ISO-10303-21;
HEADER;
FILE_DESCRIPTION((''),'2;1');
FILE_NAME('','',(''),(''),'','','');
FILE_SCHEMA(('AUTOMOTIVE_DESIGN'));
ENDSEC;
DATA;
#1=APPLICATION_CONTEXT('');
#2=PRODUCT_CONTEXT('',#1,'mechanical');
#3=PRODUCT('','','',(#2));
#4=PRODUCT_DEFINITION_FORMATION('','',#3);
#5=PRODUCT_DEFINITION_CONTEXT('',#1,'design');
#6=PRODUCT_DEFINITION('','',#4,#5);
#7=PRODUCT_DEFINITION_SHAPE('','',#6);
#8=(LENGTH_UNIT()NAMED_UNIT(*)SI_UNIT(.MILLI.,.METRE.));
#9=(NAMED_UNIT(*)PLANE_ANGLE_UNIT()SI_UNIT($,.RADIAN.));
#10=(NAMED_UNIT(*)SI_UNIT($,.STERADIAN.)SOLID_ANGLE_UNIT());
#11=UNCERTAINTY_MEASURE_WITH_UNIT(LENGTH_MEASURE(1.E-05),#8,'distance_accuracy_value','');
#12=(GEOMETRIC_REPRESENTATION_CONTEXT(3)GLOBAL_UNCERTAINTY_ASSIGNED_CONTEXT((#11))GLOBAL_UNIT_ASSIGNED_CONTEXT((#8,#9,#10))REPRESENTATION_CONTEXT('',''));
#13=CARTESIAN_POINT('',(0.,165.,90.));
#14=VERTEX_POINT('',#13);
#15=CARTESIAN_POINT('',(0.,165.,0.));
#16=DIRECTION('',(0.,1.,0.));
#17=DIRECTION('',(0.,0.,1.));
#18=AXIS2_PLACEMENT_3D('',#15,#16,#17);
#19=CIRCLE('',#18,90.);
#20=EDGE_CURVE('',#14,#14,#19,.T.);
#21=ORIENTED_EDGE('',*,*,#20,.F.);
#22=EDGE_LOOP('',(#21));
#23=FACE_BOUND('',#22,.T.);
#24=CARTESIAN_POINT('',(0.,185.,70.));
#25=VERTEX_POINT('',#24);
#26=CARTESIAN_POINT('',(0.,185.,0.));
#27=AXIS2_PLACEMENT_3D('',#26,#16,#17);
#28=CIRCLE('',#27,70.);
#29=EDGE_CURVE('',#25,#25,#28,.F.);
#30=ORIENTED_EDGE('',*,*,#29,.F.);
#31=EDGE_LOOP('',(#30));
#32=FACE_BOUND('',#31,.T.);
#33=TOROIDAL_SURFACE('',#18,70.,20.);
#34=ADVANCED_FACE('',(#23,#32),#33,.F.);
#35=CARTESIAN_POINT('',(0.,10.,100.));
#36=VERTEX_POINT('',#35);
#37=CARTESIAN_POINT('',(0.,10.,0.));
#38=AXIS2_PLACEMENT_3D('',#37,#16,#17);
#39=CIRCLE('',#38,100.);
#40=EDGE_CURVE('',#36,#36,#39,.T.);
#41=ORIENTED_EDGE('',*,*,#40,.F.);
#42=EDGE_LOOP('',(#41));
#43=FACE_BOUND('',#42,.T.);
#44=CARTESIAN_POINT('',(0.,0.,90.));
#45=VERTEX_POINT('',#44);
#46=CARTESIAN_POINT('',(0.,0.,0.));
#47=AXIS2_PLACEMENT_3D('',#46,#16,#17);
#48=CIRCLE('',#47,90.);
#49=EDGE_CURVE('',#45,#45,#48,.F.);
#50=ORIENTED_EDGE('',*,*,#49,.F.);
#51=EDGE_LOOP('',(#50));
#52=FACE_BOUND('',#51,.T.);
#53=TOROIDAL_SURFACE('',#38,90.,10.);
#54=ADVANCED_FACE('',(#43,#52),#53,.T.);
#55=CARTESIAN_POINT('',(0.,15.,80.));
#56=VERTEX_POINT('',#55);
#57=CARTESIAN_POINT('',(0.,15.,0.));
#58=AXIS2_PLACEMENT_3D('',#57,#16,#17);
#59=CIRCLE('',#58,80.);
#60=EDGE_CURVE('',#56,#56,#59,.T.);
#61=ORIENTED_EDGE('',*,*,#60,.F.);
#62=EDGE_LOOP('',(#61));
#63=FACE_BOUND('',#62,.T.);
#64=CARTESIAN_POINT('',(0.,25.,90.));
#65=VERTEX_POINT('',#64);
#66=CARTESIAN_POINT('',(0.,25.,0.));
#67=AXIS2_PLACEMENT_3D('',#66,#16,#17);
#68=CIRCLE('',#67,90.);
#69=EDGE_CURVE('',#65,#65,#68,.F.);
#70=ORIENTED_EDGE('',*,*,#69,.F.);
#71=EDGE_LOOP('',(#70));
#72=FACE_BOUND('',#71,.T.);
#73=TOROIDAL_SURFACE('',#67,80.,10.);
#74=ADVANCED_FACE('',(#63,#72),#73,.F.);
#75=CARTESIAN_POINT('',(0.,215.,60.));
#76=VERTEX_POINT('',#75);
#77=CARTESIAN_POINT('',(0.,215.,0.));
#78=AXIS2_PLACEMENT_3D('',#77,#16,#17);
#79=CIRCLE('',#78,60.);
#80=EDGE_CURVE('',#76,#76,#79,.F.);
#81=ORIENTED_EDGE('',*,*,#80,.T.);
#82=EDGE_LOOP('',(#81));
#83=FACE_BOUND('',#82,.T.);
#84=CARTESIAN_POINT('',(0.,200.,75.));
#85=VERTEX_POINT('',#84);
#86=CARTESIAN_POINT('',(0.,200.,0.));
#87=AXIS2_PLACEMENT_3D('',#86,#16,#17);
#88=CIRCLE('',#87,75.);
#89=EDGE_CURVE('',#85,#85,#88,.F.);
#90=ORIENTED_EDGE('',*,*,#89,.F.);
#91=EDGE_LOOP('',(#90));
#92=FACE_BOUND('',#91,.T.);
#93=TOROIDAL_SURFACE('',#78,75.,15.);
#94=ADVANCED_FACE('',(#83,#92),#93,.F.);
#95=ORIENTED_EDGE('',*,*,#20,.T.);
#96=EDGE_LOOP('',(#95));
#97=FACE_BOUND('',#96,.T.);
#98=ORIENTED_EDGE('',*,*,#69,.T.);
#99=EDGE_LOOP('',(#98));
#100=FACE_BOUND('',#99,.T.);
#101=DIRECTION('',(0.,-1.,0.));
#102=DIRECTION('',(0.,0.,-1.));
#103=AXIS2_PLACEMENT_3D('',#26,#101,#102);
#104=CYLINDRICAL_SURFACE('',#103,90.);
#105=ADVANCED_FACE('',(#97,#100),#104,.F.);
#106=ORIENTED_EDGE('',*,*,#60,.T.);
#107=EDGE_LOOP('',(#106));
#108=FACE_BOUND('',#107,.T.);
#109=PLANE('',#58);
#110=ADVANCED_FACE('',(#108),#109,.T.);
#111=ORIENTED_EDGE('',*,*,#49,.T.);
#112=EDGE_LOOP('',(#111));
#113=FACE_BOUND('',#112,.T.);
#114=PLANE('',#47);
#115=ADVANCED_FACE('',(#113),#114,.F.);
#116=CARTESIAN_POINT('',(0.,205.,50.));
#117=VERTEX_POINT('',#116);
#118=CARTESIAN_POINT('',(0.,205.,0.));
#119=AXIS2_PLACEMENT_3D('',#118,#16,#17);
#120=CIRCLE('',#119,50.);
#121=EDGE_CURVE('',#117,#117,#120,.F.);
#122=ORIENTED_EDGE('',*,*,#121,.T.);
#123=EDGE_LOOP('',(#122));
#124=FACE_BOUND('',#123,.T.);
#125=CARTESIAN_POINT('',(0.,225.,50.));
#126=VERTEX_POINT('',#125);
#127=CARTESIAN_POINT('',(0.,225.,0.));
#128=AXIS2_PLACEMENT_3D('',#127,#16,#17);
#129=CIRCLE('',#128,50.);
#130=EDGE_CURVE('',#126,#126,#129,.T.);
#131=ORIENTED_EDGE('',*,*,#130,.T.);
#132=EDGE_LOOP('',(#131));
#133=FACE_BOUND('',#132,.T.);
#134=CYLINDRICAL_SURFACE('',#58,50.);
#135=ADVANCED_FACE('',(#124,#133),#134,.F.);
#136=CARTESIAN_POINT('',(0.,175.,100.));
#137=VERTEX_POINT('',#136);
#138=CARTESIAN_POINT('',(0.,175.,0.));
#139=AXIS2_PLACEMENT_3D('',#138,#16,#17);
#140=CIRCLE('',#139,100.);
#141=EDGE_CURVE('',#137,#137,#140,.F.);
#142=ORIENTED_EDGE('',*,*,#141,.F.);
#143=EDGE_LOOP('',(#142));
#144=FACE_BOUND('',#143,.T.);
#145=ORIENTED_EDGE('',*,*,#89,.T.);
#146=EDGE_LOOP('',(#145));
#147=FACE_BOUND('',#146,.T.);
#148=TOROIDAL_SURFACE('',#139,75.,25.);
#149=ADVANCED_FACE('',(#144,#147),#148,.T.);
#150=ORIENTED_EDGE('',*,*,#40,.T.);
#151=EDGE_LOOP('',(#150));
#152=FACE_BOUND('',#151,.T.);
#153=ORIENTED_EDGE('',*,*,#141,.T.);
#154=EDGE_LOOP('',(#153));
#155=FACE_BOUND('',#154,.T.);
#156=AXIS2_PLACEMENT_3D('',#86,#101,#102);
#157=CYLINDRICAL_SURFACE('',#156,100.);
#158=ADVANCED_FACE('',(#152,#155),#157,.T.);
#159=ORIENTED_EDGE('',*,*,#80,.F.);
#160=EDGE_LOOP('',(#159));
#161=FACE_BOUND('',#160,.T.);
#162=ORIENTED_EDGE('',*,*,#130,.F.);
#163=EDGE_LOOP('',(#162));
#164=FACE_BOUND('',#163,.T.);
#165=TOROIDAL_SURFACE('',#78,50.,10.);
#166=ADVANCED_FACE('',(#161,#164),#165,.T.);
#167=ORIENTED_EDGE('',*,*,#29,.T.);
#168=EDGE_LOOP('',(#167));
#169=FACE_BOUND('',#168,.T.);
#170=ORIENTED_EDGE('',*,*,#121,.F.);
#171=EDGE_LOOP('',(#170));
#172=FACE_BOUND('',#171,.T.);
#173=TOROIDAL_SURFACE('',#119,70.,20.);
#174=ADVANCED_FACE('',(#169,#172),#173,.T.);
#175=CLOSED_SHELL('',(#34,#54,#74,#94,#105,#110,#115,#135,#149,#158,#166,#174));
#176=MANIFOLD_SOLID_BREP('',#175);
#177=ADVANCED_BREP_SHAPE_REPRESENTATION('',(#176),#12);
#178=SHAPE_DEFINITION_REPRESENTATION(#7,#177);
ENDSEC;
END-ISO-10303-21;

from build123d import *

# Parameters (mm, degrees)
SKETCH1_R           = 100
BOSS_EXTRUDE2_DEPTH = 200
SKETCH4_R           = 60
BOSS_EXTRUDE5_DEPTH = 25
SKETCH5_R           = 50
CUT_EXTRUDE2_DEPTH  = 210
FILLET2_R           = 10
FILLET3_R           = 10
FILLET4_R           = 15
FILLET5_R           = 25
SKETCH6_R           = 90
CUT_EXTRUDE4_DEPTH  = 170
FILLET7_R           = 20
FILLET8_R           = 20
FILLET9_R           = 10


with BuildPart() as part:
    # Sketch1 → Boss-Extrude2 (new body)
    with BuildSketch(Plane(origin=(0, 0, 0), x_dir=(1, 0, 0), z_dir=(0, 1, 0))):
        with Locations(Location((0, 0, 0), (0, 0, 270))):
            Circle(SKETCH1_R)
    extrude(amount=BOSS_EXTRUDE2_DEPTH)

    # Sketch4 → Boss-Extrude5 (add)
    with BuildSketch(Plane(origin=(0, 200, 0), x_dir=(1, 0, 0), z_dir=(0, 1, 0))):
        with Locations(Location((0, 0, 0), (0, 0, 270))):
            Circle(SKETCH4_R)
    extrude(amount=BOSS_EXTRUDE5_DEPTH)

    # Sketch5 → Cut-Extrude2 (cut)
    with BuildSketch(Plane(origin=(0, 225, 0), x_dir=(1, 0, 0), z_dir=(0, 1, 0))):
        with Locations(Location((0, 0, 0), (0, 0, 270))):
            Circle(SKETCH5_R)
    extrude(amount=-CUT_EXTRUDE2_DEPTH, mode=Mode.SUBTRACT)

    # Fillet2
    fillet2_edges = [part.edges().sort_by_distance(p)[0] for p in [
        (0, 0, -100),
    ]]
    fillet(fillet2_edges, radius=FILLET2_R)

    # Fillet3
    fillet3_edges = [part.edges().sort_by_distance(p)[0] for p in [
        (0, 225, -60),
    ]]
    fillet(fillet3_edges, radius=FILLET3_R - 0.0001)  # a hair under: the kernel refuses the full size

    # Fillet4
    fillet4_edges = [part.edges().sort_by_distance(p)[0] for p in [
        (0, 200, -60),
    ]]
    fillet(fillet4_edges, radius=FILLET4_R)

    # Fillet5
    fillet5_edges = [part.edges().sort_by_distance(p)[0] for p in [
        (0, 200, -100),
    ]]
    fillet(fillet5_edges, radius=FILLET5_R - 0.0001)  # a hair under: the kernel refuses the full size

    # Sketch6 → Cut-Extrude4 (cut)
    with BuildSketch(Plane(origin=(0, 15, 0), x_dir=(1, 0, 0), z_dir=(0, 1, 0))):
        with Locations(Location((0, 0, 0), (0, 0, 270))):
            Circle(SKETCH6_R)
    extrude(amount=CUT_EXTRUDE4_DEPTH, mode=Mode.SUBTRACT)

    # Fillet7
    fillet7_edges = [part.edges().sort_by_distance(p)[0] for p in [
        (0, 185, -90),
    ]]
    fillet(fillet7_edges, radius=FILLET7_R)

    # Fillet8
    fillet8_edges = [part.edges().sort_by_distance(p)[0] for p in [
        (0, 185, -50),
    ]]
    fillet(fillet8_edges, radius=FILLET8_R - 0.0001)  # a hair under: the kernel refuses the full size

    # Fillet9
    fillet9_edges = [part.edges().sort_by_distance(p)[0] for p in [
        (0, 15, -90),
    ]]
    fillet(fillet9_edges, radius=FILLET9_R)


solid = part.part
